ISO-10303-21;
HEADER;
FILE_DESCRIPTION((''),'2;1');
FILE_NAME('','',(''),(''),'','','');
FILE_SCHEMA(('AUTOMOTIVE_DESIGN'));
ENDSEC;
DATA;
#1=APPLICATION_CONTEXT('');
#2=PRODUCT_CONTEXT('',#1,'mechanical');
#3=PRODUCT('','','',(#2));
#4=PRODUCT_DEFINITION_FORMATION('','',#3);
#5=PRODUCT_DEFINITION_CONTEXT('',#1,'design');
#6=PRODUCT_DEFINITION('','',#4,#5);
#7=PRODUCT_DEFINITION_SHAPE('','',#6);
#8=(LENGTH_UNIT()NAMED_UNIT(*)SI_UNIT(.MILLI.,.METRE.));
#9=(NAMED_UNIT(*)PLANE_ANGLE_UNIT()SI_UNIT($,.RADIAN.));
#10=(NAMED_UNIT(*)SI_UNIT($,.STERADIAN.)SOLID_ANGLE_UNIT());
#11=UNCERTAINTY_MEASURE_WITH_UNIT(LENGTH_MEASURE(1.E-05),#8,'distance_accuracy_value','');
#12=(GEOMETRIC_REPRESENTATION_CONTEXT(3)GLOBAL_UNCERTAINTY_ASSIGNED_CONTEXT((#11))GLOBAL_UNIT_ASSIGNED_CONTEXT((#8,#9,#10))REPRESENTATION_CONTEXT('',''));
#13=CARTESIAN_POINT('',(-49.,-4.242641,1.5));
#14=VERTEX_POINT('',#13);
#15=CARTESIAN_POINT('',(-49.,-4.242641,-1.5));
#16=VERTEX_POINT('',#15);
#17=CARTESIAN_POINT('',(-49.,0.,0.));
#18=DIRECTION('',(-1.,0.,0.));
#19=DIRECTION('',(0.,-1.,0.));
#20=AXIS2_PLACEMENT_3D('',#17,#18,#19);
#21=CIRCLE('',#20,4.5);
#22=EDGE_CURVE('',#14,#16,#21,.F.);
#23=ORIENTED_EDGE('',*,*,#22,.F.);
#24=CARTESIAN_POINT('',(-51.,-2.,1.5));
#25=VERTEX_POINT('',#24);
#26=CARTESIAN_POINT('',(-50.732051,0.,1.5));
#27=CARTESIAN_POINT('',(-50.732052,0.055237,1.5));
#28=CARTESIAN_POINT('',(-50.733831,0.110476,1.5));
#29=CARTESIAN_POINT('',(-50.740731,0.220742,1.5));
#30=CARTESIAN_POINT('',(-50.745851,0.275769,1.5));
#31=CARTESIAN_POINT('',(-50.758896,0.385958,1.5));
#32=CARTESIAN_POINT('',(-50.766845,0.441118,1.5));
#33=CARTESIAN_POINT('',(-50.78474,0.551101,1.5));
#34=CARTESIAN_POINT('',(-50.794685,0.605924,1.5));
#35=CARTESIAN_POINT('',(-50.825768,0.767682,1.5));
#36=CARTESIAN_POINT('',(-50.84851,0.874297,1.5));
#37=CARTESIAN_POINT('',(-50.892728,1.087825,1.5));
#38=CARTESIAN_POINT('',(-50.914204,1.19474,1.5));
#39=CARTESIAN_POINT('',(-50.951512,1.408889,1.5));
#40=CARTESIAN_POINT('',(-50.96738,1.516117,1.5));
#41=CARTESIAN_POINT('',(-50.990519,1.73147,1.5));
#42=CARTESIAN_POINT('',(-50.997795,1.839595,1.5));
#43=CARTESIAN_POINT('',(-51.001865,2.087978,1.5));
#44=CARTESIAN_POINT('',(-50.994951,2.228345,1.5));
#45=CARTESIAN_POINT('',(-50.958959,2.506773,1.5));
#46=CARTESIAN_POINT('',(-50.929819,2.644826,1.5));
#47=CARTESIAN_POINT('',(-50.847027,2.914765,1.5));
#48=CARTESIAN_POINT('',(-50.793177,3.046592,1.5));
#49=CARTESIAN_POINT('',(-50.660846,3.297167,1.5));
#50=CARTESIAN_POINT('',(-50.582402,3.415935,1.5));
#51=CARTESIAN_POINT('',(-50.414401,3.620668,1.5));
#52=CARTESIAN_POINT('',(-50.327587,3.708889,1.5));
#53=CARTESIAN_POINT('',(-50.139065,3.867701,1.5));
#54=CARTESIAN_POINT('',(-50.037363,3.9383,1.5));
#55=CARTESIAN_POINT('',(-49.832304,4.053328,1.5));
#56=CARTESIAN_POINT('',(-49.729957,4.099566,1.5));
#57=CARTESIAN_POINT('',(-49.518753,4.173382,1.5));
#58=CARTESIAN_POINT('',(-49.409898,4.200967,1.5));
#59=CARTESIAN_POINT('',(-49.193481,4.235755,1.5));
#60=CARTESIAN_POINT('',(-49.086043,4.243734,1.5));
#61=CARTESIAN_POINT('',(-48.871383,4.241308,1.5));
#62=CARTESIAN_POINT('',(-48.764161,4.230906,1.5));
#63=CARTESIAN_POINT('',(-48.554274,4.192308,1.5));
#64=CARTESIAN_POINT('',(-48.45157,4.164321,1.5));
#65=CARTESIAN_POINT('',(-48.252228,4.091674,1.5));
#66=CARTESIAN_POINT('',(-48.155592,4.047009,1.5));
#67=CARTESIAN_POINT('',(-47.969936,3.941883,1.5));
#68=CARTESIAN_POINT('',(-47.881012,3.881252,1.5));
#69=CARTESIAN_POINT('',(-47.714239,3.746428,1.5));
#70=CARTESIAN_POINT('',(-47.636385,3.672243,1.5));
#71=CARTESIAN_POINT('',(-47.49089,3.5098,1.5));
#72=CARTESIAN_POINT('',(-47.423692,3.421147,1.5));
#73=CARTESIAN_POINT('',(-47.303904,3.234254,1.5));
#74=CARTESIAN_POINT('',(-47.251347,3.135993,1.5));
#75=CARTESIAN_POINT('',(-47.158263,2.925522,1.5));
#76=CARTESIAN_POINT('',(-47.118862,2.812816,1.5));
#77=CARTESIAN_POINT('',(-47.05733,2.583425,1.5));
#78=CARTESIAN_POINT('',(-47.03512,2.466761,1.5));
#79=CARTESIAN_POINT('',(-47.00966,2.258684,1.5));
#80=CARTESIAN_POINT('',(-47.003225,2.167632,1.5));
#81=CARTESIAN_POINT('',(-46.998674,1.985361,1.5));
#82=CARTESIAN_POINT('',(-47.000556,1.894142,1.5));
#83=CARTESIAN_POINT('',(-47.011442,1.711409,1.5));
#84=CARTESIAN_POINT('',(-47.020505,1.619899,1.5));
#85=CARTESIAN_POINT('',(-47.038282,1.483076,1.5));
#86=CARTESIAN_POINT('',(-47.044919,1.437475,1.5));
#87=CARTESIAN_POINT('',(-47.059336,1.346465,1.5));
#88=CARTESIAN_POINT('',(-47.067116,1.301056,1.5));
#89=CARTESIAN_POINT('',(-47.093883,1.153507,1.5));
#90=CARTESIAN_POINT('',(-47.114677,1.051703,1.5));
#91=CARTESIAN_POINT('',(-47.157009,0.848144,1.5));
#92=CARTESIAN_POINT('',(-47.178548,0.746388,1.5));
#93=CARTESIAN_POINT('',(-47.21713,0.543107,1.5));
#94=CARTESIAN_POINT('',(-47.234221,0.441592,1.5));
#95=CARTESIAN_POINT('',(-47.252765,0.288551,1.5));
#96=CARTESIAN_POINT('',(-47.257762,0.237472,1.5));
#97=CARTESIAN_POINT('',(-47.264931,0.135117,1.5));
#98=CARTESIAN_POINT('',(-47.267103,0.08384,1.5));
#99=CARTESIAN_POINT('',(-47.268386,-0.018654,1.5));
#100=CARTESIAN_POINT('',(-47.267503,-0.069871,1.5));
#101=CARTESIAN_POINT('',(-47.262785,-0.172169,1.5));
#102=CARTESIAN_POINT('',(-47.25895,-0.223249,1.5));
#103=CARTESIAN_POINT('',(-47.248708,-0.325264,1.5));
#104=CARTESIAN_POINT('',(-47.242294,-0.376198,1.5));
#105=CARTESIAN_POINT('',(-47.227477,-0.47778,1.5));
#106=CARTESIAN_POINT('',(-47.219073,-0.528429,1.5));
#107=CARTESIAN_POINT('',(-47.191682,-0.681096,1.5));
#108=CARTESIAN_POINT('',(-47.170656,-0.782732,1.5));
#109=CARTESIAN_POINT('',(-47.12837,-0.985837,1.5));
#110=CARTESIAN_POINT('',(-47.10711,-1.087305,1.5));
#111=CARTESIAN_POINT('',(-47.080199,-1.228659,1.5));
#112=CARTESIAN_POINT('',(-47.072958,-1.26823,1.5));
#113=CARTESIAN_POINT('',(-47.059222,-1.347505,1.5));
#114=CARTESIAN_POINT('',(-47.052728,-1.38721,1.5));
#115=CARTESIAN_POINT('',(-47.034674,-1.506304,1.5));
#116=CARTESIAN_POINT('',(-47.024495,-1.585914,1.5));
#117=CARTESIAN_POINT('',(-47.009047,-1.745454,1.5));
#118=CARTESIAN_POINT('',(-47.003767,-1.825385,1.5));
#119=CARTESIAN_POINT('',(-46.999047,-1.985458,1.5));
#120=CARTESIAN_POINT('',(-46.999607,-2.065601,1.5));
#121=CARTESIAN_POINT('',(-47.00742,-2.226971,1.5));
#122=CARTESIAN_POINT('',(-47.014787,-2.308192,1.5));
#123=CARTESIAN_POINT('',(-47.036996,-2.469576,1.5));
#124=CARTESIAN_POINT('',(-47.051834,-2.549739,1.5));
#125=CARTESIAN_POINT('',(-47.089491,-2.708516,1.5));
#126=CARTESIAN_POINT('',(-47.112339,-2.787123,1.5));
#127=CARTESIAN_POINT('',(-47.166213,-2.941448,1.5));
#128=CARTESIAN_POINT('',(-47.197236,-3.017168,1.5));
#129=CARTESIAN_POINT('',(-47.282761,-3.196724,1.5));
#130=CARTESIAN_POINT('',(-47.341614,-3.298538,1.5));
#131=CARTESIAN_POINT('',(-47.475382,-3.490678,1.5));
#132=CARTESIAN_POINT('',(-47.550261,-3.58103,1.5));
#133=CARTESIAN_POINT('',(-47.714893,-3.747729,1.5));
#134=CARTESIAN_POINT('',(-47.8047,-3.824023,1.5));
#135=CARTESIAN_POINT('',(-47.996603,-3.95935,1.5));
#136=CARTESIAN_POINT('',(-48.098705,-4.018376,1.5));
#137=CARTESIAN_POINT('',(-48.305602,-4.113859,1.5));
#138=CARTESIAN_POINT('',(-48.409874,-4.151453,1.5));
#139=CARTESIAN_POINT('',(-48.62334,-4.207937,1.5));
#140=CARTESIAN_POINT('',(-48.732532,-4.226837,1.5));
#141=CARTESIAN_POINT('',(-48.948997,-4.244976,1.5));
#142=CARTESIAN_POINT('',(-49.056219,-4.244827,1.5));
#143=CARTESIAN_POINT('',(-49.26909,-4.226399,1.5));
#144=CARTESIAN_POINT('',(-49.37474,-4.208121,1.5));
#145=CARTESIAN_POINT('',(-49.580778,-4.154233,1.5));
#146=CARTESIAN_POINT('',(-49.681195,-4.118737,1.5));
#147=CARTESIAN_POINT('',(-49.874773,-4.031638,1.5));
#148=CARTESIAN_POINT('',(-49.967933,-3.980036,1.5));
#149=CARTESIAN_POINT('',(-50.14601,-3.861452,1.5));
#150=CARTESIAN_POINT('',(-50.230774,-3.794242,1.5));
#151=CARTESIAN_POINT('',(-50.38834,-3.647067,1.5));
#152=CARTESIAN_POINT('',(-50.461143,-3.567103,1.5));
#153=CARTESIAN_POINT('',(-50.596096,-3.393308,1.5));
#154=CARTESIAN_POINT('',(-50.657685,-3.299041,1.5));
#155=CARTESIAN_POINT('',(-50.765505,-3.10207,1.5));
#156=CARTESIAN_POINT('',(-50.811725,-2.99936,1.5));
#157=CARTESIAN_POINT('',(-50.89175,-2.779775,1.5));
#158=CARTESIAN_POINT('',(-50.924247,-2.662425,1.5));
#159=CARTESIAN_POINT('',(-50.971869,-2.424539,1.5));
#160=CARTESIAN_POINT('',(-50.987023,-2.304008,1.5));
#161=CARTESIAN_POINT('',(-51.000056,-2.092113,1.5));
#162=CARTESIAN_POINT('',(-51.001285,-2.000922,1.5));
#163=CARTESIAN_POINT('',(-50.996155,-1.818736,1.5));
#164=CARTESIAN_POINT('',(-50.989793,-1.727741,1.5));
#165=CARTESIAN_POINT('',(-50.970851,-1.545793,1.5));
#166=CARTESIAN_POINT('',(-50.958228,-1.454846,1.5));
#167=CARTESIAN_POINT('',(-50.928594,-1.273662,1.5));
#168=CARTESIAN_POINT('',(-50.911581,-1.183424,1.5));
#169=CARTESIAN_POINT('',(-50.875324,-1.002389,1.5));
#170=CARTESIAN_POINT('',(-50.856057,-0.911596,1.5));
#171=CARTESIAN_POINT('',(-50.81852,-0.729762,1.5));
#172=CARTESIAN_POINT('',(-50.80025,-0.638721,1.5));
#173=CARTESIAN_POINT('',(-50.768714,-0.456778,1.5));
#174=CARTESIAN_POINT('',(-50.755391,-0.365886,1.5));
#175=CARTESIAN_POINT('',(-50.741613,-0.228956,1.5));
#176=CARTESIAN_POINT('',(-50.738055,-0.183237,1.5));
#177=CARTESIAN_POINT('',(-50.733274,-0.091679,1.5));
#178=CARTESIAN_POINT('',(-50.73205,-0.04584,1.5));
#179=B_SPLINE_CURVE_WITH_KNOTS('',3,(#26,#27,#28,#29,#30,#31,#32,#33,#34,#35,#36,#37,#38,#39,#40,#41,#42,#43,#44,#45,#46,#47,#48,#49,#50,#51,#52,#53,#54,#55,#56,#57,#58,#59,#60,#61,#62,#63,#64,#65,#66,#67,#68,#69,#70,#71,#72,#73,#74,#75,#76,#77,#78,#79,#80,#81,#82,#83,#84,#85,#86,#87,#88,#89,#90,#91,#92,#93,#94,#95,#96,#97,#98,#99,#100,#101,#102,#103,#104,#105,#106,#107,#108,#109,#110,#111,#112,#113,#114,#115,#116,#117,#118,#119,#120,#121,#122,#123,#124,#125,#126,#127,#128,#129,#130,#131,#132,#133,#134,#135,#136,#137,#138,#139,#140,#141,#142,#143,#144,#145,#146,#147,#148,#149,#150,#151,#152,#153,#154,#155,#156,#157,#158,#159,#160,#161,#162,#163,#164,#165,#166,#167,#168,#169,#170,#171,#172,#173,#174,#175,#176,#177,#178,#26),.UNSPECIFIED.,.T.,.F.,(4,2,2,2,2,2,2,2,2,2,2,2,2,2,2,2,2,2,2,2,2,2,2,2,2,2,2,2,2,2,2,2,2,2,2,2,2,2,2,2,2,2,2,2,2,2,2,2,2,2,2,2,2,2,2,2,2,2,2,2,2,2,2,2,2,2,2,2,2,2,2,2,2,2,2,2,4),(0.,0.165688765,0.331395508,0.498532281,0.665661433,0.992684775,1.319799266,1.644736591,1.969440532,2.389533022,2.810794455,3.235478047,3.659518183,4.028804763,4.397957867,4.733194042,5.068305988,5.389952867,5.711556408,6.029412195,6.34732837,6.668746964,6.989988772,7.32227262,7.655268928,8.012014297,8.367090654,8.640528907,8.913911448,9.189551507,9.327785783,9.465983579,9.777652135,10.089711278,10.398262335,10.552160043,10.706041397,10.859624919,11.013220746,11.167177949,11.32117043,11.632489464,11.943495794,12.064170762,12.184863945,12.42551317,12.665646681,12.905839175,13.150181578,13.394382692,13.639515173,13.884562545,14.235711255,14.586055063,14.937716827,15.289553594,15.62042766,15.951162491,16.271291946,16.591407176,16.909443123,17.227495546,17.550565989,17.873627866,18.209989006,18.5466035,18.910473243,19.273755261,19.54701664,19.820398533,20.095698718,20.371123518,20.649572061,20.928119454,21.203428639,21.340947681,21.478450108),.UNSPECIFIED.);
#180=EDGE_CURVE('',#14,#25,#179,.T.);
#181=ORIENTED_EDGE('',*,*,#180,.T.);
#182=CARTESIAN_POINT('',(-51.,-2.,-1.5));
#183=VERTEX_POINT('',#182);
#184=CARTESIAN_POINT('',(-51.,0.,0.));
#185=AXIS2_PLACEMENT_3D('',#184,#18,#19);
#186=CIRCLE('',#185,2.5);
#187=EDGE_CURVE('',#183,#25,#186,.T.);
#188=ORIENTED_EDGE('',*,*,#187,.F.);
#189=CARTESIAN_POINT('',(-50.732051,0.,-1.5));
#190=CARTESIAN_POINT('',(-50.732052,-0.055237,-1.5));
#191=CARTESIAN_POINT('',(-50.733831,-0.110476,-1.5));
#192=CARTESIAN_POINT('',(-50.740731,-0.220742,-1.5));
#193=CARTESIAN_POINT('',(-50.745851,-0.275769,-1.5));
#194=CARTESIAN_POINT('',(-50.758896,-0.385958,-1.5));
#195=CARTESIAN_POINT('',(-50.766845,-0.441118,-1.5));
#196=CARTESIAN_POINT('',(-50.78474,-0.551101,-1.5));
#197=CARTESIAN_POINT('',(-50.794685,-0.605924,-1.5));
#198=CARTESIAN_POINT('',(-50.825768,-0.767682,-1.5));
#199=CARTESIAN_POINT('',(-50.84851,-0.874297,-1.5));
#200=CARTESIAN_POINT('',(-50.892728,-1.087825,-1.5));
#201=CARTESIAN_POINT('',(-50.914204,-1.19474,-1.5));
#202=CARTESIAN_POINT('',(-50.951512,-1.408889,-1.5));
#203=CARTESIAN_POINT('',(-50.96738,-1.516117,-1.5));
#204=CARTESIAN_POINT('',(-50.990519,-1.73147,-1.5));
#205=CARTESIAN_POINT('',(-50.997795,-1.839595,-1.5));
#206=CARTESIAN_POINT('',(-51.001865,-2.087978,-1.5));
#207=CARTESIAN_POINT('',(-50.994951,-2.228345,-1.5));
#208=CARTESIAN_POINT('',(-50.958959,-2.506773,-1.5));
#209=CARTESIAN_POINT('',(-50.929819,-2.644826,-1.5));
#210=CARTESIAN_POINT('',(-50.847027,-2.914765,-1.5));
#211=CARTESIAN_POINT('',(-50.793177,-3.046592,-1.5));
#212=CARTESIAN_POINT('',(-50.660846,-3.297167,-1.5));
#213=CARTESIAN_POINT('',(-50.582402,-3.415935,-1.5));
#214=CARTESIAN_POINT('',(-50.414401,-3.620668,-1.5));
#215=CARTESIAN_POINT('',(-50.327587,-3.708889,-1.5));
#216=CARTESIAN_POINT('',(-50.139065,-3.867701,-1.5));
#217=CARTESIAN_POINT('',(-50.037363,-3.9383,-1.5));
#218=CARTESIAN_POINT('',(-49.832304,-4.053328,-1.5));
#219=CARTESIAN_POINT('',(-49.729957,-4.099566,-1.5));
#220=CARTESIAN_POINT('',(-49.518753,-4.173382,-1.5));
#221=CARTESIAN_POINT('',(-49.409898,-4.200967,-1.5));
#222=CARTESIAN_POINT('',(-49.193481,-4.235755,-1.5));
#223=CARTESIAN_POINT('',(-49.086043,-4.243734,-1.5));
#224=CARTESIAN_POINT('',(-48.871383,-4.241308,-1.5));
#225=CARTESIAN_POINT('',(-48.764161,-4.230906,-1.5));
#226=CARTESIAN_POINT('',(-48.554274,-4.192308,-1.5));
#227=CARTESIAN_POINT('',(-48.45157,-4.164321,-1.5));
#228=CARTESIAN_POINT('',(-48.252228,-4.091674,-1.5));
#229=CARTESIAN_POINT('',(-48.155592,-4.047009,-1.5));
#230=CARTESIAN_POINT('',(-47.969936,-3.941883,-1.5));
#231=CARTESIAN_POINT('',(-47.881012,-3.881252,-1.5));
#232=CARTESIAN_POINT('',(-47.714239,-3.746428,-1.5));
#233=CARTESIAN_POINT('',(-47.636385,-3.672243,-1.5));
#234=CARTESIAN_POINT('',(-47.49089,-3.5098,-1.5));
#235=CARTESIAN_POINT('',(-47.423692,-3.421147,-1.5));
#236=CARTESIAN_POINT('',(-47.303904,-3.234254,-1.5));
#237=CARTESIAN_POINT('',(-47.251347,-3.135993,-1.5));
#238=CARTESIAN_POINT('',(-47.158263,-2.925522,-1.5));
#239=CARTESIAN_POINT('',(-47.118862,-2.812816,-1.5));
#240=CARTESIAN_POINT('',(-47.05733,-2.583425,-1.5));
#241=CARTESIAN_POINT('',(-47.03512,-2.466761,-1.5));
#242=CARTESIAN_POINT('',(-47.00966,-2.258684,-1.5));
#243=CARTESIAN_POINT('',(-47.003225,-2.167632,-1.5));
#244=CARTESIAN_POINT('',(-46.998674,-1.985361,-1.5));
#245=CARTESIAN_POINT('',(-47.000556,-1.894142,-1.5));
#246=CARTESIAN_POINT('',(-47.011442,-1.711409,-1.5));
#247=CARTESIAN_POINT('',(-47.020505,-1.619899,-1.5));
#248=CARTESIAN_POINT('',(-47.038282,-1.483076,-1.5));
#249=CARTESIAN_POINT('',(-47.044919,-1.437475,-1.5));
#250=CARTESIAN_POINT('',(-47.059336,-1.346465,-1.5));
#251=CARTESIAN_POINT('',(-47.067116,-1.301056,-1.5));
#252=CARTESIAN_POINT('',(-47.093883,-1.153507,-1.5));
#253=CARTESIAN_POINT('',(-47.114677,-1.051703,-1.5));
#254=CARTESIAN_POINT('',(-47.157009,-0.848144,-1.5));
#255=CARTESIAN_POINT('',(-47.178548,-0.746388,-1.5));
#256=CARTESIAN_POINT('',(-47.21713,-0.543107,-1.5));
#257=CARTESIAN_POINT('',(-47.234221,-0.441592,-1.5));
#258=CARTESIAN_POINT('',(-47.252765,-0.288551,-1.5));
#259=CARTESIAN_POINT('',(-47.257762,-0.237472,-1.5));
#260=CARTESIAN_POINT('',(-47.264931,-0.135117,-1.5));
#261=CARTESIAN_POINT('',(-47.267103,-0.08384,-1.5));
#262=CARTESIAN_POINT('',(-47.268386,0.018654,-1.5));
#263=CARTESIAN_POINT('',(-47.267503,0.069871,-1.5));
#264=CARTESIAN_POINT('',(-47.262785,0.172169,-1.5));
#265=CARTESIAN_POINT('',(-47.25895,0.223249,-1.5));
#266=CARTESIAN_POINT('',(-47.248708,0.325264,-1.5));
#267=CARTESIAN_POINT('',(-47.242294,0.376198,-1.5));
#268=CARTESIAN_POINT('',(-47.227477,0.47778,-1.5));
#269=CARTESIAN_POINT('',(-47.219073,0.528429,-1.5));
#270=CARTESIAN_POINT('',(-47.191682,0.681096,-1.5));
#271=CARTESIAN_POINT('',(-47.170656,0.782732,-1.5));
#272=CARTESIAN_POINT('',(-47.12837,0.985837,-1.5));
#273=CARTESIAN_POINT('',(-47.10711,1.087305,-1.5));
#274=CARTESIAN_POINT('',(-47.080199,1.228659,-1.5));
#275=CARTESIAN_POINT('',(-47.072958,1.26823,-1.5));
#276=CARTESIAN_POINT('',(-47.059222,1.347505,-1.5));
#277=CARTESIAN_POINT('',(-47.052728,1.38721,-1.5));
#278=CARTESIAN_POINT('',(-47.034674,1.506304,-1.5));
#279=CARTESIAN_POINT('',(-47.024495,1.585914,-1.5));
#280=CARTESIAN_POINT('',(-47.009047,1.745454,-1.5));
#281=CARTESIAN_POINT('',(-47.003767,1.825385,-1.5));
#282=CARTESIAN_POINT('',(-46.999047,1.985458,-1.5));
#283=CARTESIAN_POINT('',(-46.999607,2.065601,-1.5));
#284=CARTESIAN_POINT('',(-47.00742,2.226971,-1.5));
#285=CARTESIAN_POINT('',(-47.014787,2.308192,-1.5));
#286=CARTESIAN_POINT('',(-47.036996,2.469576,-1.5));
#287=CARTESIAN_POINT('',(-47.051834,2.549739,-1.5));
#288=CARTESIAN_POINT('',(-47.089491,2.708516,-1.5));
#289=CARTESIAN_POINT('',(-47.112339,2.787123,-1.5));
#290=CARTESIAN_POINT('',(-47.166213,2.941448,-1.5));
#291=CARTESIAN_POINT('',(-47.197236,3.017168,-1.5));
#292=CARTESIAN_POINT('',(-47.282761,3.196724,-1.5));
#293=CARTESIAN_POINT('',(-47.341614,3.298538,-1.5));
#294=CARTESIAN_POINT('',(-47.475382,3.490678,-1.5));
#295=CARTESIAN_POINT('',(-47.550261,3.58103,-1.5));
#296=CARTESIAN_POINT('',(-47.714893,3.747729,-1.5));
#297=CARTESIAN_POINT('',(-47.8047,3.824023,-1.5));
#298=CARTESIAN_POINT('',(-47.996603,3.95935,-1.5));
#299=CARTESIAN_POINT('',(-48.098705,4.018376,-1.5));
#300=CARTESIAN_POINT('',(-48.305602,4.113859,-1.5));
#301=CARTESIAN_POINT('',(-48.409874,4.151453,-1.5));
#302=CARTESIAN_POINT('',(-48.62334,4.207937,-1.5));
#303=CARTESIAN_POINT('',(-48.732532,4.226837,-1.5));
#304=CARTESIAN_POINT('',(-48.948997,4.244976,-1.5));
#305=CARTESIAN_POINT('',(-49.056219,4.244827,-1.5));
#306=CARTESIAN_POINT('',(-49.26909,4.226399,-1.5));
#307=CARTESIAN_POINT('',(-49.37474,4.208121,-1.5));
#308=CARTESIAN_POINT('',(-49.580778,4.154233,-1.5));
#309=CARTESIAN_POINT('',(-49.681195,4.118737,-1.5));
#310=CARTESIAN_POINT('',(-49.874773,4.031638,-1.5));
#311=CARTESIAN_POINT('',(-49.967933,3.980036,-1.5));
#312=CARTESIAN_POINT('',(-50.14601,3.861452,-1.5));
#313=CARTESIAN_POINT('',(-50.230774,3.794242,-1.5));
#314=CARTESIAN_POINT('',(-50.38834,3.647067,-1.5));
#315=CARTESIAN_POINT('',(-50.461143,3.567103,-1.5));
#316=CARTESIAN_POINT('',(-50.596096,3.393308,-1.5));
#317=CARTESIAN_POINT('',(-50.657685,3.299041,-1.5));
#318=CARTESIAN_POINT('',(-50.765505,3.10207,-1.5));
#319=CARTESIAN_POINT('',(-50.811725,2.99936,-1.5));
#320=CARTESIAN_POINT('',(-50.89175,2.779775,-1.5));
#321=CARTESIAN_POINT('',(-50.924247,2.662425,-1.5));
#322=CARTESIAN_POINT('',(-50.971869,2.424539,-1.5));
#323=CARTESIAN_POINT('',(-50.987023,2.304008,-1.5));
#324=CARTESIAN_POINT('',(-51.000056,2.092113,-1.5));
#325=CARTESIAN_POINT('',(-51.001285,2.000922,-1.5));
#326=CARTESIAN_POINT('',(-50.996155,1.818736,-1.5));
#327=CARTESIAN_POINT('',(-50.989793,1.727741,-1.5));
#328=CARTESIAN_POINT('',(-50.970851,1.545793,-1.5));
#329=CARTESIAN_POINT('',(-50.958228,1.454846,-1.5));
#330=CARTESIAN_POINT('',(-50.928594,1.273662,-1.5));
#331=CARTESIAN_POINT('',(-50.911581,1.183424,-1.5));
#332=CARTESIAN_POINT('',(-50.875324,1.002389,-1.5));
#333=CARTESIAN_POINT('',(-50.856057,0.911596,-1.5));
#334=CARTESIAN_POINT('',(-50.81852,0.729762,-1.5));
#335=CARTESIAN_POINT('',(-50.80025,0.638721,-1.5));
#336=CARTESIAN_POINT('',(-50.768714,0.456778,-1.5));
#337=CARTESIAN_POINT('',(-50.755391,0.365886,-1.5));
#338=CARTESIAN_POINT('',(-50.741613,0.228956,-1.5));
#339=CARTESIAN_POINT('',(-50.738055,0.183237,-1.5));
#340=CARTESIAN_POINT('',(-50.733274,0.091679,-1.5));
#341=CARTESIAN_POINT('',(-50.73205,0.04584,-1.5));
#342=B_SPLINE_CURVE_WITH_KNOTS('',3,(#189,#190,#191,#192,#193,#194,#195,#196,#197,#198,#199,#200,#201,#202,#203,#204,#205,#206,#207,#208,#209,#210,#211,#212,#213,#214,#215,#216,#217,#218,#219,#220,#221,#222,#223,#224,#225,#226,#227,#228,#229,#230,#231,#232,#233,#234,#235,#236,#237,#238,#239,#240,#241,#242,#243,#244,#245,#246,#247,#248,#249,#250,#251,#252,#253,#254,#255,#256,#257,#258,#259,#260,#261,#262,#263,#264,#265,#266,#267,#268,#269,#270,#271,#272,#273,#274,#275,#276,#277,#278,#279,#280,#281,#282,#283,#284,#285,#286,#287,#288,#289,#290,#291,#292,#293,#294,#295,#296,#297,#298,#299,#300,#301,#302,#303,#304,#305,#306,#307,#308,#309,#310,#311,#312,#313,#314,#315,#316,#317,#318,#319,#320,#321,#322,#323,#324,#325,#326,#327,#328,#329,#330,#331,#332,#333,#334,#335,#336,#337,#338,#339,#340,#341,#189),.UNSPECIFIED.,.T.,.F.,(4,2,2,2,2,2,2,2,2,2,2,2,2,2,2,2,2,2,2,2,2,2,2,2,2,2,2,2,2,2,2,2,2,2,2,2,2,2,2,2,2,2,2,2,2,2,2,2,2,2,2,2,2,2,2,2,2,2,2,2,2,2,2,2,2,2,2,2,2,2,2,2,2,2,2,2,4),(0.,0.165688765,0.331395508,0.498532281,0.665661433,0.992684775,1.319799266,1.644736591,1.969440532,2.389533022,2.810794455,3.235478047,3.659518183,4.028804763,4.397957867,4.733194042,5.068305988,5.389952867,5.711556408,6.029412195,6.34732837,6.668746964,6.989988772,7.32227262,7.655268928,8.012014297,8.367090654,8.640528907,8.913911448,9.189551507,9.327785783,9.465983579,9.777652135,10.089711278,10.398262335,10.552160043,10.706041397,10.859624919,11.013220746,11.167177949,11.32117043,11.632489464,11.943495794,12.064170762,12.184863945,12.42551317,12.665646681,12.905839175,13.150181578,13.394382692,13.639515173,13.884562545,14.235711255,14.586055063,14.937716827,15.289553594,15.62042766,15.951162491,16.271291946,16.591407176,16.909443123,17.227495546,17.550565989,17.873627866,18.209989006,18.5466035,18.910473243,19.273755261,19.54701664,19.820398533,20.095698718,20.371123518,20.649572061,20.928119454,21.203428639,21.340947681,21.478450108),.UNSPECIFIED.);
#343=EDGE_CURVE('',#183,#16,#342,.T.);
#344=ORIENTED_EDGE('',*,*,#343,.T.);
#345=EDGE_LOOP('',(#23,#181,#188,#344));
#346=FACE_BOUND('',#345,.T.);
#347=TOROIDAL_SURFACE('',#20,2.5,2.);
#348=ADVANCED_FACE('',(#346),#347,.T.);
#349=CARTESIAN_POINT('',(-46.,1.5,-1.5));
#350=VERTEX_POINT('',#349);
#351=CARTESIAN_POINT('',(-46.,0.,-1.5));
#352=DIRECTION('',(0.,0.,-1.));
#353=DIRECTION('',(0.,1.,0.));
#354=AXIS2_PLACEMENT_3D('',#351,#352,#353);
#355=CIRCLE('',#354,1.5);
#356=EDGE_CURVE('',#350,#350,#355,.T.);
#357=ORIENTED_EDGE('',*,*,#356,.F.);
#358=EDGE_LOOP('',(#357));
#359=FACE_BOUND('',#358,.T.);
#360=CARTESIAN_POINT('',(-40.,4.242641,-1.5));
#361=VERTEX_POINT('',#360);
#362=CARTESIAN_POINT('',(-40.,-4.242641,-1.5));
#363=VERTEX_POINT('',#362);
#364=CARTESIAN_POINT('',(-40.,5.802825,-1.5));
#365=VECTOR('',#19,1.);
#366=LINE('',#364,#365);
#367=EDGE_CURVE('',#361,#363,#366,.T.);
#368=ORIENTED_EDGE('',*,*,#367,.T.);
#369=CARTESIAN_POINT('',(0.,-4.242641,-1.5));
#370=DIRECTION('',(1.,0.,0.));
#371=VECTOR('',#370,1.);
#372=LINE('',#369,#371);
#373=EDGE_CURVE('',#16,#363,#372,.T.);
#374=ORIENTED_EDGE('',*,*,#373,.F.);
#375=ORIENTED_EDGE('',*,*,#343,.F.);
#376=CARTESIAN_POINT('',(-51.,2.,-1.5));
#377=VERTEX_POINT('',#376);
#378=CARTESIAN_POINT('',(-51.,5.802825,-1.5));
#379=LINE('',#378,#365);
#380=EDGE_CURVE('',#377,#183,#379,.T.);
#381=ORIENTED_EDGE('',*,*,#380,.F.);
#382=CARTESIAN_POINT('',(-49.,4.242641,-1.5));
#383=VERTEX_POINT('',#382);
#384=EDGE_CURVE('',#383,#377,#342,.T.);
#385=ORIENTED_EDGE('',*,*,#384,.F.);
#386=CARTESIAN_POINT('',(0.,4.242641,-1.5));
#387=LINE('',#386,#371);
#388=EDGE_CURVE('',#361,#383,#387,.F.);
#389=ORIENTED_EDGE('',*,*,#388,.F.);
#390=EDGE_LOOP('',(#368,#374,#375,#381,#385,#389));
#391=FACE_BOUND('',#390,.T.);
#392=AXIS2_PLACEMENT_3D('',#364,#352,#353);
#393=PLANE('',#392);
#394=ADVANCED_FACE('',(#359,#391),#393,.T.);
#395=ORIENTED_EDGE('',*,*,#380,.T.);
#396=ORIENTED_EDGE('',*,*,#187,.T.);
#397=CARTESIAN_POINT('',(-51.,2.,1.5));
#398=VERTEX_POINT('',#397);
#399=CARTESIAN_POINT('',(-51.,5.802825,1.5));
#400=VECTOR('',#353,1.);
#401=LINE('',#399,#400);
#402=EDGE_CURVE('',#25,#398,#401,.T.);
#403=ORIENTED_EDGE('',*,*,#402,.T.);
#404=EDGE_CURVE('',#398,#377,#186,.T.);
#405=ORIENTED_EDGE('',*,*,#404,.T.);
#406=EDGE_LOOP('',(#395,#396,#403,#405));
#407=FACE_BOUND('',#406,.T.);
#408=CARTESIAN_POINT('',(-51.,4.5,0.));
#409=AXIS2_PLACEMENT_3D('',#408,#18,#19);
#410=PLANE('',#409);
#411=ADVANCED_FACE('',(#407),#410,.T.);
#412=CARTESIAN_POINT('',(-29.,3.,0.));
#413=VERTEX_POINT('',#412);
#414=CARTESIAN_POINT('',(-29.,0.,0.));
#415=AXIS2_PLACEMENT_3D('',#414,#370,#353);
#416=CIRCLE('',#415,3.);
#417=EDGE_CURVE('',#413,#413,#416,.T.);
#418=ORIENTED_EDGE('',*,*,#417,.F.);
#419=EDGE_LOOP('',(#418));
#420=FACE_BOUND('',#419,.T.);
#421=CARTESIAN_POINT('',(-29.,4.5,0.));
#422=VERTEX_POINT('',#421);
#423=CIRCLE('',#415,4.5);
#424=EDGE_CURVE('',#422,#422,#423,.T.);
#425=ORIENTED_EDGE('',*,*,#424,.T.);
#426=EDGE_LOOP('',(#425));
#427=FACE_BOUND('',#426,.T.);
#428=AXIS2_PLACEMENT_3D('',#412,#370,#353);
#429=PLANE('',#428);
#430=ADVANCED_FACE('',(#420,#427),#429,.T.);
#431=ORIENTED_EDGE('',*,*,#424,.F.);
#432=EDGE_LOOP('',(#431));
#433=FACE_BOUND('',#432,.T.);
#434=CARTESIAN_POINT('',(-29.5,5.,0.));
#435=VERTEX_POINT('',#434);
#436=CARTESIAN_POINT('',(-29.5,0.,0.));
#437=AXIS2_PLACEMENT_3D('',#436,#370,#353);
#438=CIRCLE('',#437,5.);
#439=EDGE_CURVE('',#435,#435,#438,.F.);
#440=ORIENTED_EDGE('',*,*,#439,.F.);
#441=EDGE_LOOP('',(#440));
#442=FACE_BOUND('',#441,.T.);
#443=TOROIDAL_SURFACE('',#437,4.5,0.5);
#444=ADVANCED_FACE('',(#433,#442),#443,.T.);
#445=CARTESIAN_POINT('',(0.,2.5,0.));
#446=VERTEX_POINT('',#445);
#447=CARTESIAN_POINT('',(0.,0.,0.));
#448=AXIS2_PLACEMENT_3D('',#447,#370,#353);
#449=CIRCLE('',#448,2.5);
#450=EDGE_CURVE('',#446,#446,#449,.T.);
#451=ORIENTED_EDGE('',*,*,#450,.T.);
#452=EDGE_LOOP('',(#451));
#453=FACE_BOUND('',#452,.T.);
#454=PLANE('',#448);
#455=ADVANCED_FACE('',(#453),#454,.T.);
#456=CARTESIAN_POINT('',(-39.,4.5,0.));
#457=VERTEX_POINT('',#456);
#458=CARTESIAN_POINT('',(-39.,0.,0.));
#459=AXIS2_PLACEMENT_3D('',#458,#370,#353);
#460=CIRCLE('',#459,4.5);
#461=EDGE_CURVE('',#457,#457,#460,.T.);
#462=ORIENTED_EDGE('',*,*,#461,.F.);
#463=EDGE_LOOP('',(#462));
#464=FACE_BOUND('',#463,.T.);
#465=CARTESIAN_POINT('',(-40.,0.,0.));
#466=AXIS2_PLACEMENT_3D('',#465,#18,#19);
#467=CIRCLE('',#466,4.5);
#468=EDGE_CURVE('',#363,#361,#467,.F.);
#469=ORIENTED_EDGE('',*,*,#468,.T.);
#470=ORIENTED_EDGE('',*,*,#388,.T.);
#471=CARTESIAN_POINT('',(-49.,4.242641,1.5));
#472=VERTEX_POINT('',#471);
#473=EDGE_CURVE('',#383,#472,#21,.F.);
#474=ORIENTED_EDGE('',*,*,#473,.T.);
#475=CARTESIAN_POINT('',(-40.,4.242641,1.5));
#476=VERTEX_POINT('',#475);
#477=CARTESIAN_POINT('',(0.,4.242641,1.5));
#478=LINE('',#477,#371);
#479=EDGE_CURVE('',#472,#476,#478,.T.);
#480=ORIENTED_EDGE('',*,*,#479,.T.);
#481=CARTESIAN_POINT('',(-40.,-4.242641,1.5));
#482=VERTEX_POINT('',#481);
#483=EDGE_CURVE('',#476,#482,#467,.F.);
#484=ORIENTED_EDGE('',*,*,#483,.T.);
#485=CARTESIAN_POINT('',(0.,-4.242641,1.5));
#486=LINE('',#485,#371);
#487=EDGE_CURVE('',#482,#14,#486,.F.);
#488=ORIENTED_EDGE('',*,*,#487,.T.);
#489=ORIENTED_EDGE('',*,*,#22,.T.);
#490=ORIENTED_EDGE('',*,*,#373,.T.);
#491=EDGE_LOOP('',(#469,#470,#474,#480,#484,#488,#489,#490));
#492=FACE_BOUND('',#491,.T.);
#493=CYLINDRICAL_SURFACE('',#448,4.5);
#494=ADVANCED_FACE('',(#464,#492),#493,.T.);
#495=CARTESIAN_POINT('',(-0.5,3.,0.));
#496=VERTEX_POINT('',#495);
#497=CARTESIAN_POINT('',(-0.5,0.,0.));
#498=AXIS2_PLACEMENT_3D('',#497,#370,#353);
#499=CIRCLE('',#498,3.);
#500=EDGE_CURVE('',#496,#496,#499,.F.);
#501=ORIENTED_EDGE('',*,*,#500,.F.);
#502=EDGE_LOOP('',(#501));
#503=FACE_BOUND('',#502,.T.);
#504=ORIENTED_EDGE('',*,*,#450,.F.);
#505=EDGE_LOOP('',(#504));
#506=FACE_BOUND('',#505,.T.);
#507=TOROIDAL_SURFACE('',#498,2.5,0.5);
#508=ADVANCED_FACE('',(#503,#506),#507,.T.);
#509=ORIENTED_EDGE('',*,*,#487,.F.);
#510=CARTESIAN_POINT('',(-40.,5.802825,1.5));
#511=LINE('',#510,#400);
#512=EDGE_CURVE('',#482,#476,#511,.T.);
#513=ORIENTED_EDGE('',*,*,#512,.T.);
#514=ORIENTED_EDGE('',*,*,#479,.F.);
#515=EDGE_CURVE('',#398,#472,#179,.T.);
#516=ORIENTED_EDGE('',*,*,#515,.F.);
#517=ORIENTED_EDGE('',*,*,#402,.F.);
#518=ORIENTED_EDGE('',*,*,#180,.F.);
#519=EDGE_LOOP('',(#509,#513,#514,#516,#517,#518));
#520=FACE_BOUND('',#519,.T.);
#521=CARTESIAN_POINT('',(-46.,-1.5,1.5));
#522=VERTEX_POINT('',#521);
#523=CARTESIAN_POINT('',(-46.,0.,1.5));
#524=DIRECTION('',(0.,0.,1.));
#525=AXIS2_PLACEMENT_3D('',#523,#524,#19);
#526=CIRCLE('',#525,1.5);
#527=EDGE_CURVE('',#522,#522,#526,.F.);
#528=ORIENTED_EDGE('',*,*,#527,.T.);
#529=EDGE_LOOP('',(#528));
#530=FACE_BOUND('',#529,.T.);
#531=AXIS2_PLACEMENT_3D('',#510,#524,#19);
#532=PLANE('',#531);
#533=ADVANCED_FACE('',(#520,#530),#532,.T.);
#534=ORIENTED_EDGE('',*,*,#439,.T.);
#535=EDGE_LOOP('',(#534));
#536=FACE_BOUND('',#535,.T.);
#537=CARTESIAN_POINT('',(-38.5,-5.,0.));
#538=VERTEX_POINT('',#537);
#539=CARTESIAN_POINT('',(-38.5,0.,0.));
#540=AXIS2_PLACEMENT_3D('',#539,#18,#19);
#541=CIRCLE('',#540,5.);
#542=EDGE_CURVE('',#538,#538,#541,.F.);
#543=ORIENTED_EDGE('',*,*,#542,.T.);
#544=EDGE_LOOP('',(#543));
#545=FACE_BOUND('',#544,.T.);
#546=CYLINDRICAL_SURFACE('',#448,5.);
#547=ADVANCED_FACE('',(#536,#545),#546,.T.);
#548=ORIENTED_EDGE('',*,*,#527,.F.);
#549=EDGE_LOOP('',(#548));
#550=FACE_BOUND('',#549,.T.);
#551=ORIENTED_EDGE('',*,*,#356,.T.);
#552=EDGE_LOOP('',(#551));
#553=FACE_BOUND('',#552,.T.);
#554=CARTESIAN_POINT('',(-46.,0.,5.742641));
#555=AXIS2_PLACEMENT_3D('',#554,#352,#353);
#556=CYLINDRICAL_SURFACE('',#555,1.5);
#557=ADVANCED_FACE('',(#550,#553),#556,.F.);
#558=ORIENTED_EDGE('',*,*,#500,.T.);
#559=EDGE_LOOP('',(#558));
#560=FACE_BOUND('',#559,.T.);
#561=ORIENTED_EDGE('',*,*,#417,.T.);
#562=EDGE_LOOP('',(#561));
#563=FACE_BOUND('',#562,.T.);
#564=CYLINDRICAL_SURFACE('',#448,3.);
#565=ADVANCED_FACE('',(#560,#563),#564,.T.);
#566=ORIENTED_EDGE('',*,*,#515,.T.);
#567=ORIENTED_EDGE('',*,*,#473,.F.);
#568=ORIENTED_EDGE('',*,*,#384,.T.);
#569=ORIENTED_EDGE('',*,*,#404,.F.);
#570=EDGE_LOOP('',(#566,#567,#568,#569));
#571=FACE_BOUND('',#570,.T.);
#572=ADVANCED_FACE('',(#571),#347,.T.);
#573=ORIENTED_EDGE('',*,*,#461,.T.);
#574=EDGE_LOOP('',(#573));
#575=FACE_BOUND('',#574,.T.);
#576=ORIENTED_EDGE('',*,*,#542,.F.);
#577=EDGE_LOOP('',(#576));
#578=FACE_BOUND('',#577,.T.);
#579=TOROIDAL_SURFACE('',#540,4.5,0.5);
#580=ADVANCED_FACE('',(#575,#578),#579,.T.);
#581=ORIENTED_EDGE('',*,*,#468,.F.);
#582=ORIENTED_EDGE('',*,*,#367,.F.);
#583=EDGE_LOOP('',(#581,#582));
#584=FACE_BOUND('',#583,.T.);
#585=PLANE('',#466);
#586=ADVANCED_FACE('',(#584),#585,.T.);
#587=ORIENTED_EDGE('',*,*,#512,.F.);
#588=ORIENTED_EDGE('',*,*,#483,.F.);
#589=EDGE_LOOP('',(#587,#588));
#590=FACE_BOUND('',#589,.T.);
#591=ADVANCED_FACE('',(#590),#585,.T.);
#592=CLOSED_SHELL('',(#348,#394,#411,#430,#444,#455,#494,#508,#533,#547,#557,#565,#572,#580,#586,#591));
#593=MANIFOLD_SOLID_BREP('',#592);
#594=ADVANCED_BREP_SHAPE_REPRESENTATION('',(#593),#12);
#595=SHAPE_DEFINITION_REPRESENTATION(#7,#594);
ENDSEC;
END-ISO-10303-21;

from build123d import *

# Parameters (mm, degrees)
FILLET_1_R          = 2
SKETCH_2_R          = 7.321356554
SKETCH_2_W          = 3
SKETCH_2_H          = 11.961651185
CUT_EXTRUDE_1_DEPTH = 11
SKETCH_3_R          = 1.5
CUT_EXTRUDE_2_DEPTH = 3
FILLET_2_R          = 0.5


with BuildPart() as part:
    # 草图1 → 旋转1 (revolve)
    with BuildSketch(Plane.XY):
        Polygon((0, 0), (0, 3), (-29, 3), (-29, 5), (-39, 5), (-39, 4.5), (-51, 4.5), (-51, 0), align=None)
    revolve(axis=Axis((0, 0, 0), (-1, 0, 0)))

    # 圆角1
    fillet_1_edges = [part.edges().sort_by_distance(p)[0] for p in [
        (-51, -4.5, 0),
    ]]
    fillet(fillet_1_edges, radius=FILLET_1_R)

    # 草图2 → 切除-拉伸1 (cut)
    with BuildSketch(Plane.ZY.offset(51)):
        Circle(SKETCH_2_R)
        with Locations((0, -0.178000761)):
            Rectangle(SKETCH_2_W, SKETCH_2_H, mode=Mode.SUBTRACT)
    extrude(amount=-CUT_EXTRUDE_1_DEPTH, mode=Mode.SUBTRACT)

    # 草图3 → 切除-拉伸2 (cut)
    with BuildSketch(Plane(origin=(0, 0, -1.5), x_dir=(-1, 0, 0), z_dir=(0, 0, -1))):
        with Locations(Location((46, 0, 0), (0, 0, 90))):
            Circle(SKETCH_3_R)
    extrude(amount=-CUT_EXTRUDE_2_DEPTH, mode=Mode.SUBTRACT)

    # 圆角2
    fillet_2_edges = [part.edges().sort_by_distance(p)[0] for p in [
        (-39, -5, 0),
        (-29, -5, 0),
        (0, -3, 0),
    ]]
    fillet(fillet_2_edges, radius=FILLET_2_R - 0.0001)  # a hair under: the kernel refuses the full size


solid = part.part
